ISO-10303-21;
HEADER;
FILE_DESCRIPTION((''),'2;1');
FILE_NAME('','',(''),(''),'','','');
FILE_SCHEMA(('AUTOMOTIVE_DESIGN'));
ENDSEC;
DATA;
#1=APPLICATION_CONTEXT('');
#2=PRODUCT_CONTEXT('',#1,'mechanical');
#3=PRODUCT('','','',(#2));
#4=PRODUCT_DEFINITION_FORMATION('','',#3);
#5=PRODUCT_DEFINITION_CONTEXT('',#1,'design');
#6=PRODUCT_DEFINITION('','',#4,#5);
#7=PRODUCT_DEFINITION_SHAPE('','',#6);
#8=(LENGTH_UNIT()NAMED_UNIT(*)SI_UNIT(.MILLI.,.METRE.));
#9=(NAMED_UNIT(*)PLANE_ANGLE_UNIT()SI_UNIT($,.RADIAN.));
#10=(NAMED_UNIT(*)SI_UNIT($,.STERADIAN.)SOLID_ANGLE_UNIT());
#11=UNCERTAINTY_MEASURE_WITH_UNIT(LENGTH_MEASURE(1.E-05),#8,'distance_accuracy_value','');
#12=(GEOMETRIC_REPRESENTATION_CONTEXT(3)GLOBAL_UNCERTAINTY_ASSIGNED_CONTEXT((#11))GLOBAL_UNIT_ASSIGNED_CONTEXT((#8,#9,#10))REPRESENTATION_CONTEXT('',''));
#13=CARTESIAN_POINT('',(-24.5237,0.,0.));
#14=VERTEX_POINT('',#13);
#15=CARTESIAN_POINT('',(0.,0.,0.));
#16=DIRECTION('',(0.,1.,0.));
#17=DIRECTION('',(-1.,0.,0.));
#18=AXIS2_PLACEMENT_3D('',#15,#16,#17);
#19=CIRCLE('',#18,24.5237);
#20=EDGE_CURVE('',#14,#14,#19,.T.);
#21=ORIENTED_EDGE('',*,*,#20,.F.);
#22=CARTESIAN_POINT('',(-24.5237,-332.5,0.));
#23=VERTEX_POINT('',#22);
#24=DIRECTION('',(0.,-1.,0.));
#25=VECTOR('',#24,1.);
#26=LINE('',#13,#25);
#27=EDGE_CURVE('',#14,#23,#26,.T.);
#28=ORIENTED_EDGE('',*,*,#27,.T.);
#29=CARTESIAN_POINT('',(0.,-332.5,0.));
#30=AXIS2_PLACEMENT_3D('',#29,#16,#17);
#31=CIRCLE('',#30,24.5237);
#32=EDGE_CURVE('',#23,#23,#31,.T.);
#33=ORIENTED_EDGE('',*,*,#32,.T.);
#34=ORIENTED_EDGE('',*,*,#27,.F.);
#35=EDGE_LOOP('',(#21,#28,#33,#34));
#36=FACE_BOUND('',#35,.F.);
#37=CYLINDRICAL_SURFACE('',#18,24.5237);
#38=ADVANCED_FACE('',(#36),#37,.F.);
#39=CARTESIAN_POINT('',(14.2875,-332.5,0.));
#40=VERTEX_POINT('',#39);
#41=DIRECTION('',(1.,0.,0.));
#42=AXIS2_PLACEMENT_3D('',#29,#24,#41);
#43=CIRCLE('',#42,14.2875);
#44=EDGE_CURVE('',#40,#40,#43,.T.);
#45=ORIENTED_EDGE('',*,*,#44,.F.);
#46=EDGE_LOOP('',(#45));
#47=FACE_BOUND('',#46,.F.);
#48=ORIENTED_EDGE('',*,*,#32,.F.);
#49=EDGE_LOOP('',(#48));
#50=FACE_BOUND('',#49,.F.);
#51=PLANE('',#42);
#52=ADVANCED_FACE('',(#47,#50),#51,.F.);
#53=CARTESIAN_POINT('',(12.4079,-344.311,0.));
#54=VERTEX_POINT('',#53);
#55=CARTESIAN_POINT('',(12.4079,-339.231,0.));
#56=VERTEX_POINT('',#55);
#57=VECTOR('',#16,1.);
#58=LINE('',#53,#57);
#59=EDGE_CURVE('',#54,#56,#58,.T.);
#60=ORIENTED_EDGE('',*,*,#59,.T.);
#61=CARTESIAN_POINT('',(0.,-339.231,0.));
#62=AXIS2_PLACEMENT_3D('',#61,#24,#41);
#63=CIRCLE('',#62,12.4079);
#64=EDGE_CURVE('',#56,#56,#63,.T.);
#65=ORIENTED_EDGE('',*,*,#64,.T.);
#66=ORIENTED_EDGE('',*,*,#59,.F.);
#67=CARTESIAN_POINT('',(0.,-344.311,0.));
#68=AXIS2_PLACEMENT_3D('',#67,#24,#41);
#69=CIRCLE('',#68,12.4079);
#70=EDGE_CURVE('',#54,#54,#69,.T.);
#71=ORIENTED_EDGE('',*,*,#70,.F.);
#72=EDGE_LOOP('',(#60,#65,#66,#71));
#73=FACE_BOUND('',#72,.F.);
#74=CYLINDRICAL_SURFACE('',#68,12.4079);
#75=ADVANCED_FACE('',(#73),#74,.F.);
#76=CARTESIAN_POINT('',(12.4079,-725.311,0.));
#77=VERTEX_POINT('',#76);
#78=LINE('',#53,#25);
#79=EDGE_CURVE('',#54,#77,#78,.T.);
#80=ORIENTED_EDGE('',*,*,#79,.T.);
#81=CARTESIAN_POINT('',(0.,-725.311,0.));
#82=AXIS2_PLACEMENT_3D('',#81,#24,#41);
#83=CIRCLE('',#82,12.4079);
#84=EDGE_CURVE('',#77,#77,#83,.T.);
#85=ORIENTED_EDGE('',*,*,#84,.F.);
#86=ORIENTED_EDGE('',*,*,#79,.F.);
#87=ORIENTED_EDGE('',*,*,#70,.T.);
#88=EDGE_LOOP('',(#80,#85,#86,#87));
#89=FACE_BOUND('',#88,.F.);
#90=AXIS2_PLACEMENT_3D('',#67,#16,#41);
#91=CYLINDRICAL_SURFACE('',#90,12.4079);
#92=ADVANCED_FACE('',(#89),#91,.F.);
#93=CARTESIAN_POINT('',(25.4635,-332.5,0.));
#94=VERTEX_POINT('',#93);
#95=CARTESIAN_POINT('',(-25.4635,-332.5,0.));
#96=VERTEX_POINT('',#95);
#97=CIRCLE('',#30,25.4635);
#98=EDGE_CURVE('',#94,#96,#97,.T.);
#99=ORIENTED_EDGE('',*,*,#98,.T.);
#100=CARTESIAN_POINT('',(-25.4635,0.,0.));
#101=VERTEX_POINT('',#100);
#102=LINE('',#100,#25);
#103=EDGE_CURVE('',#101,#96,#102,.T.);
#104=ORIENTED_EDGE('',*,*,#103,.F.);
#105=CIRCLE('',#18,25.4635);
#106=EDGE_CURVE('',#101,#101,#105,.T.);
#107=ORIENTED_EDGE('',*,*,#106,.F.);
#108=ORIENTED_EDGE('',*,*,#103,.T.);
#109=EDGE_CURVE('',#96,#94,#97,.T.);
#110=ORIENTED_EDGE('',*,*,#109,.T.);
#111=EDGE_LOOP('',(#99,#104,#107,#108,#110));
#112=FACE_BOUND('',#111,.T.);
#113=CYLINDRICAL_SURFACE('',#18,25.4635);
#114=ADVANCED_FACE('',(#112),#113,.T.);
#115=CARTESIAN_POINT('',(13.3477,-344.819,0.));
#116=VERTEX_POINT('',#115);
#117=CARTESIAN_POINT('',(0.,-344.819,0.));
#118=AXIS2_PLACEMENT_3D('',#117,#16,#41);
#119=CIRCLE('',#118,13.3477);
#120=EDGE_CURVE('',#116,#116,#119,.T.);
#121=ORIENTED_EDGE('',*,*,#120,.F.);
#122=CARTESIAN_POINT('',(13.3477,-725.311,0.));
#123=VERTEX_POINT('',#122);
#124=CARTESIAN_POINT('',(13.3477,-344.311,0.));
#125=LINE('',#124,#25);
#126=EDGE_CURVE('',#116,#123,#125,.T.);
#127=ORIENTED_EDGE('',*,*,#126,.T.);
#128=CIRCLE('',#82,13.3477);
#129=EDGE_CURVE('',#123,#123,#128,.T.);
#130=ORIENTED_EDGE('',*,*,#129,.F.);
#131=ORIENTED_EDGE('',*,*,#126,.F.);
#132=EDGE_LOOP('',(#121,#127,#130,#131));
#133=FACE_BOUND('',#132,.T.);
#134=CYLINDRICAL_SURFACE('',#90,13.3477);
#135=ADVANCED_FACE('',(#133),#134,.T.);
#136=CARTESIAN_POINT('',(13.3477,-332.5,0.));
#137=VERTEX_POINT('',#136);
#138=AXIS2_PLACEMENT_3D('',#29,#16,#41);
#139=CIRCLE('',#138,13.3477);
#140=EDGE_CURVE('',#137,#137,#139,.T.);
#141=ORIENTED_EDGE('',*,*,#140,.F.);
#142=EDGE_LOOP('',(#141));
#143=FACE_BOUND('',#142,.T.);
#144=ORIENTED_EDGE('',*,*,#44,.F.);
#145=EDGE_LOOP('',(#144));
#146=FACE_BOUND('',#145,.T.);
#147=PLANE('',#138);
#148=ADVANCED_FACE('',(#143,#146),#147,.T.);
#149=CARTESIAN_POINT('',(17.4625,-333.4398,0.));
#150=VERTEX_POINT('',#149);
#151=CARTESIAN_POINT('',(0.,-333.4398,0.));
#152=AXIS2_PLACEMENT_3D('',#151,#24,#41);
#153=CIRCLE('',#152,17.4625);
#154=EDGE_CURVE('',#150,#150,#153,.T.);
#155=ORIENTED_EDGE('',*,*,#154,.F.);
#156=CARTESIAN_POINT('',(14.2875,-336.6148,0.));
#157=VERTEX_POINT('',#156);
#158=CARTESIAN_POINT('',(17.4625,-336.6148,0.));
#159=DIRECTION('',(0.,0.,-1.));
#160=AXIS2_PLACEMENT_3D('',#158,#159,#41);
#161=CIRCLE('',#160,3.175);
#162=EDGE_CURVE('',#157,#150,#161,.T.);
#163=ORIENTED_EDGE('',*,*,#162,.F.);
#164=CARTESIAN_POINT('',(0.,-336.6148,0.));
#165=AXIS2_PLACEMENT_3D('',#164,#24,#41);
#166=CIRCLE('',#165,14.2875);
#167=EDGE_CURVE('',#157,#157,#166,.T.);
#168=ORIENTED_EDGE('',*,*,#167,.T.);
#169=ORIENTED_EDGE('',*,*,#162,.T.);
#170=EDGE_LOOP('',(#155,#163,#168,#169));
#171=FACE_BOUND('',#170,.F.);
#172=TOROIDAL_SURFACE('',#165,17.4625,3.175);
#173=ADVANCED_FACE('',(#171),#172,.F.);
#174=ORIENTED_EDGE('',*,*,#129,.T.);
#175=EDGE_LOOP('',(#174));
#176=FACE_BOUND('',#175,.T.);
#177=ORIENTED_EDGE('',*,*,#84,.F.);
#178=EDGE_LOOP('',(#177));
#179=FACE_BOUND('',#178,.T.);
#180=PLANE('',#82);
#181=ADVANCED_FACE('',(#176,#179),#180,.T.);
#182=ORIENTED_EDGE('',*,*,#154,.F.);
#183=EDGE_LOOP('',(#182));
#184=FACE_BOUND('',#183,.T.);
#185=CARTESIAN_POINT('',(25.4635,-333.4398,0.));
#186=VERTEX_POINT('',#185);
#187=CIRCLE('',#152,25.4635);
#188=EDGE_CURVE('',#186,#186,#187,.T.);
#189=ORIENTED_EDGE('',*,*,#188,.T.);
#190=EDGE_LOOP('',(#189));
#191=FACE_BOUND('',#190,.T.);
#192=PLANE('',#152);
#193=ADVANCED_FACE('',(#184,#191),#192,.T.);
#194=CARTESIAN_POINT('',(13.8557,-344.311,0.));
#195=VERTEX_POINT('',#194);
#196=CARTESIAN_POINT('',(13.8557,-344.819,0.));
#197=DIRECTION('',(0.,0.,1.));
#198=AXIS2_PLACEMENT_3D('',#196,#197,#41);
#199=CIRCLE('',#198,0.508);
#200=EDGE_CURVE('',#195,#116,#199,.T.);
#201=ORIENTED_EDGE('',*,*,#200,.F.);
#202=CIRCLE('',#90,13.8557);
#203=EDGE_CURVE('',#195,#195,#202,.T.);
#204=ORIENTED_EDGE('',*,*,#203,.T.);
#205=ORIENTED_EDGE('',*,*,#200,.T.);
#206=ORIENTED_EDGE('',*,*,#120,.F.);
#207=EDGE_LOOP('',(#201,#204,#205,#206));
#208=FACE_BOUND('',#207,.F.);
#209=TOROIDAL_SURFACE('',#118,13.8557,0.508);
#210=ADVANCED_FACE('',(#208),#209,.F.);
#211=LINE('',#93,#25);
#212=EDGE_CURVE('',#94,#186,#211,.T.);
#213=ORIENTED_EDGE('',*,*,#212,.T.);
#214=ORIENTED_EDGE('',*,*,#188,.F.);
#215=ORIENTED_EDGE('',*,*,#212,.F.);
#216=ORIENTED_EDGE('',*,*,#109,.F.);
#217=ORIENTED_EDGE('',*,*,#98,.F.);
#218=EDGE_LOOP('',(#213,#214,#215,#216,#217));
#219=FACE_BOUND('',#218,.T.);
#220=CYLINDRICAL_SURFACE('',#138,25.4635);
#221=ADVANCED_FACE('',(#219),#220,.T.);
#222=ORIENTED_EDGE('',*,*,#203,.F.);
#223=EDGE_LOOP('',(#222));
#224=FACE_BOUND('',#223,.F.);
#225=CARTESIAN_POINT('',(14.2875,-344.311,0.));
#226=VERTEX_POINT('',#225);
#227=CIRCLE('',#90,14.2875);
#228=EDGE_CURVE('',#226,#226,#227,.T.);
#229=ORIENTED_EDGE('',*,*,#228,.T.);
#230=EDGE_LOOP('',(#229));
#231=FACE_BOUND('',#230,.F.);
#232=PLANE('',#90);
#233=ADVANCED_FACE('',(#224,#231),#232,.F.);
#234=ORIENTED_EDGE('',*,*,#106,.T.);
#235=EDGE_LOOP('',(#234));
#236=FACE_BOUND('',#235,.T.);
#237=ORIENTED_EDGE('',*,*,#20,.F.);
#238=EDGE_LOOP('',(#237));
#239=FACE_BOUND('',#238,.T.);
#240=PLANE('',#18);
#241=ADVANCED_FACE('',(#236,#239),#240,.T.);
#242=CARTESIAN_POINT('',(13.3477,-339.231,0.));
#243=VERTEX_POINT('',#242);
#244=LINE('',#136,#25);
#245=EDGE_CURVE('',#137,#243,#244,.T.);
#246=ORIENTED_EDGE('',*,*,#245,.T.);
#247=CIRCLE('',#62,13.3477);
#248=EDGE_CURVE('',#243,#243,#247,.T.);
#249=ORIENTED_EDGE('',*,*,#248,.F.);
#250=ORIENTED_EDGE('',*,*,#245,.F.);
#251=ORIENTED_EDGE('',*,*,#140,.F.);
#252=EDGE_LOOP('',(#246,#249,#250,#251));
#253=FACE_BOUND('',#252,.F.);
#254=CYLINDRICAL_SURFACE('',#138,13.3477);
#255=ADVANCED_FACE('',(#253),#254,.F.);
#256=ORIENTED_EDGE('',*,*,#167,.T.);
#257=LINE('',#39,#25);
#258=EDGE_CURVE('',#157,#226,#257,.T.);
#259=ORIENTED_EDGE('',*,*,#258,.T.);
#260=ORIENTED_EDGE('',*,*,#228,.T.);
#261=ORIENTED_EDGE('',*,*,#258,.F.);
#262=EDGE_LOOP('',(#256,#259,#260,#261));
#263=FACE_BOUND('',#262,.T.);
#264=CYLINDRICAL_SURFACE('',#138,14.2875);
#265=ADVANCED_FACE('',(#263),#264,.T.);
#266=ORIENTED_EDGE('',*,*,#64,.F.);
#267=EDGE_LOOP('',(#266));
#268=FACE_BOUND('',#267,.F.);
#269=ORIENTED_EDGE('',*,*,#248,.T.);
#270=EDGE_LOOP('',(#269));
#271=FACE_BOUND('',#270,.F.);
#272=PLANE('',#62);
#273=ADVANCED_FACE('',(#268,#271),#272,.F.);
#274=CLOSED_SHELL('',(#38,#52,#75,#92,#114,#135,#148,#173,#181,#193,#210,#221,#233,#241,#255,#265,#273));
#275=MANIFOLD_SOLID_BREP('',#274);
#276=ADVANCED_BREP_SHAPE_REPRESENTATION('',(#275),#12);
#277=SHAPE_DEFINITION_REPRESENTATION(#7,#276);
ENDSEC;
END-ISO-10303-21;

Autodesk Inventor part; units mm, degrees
ref_plane "YZ Plane" through (0, 0, 0) normal (1, 0, 0) x (0, 1, 0)
ref_plane "XZ Plane" through (0, 0, 0) normal (0, 1, 0) x (-1, 0, 0)
ref_plane "XY Plane" through (0, 0, 0) normal (0, 0, 1) x (1, 0, 0)
sketch "Sketch1" plane through (0, 0, 0) normal (0, 1, 0) x (-1, 0, 0)
  circle A0 centre (0, 0) radius 25.4635
  circle A1 centre (0, 0) radius 24.5237
  dimension "d0" = 50.927
  dimension "d1" = 0.9398
extrude "Extrusion1" add sketch "Sketch1" against normal blind 332.5
sketch "Sketch2" plane through (0, -332.5, 0) normal (0, -1, 0) x (1, 0, 0)
  circle A0 centre (0, 0) radius 14.2875
  circle A1 centre (0, 0) radius 25.4635
  circle A2 centre (0, 0) radius 25.4635 projected
  dimension "d4" = 28.575
extrude "Extrusion2" add sketch "Sketch2" along normal blind 0.9398
sketch "Sketch3" plane through (0, -332.5, 0) normal (0, 1, 0) x (1, 0, 0)
  circle A0 centre (0, 0) radius 14.2875
  circle A1 centre (0, 0) radius 14.2875 projected
  circle A2 centre (0, 0) radius 13.3477
  dimension "d7" = 0.9398
extrude "Extrusion3" add sketch "Sketch3" against normal blind 11.811
sketch "Sketch4" plane through (0, -344.311, 0) normal (0, -1, 0) x (1, 0, 0)
  circle A0 centre (0, 0) radius 13.3477
  circle A1 centre (0, 0) radius 13.3477 projected
  circle A2 centre (0, 0) radius 12.4079
  dimension "d10" = 0.9398
extrude "Extrusion4" add sketch "Sketch4" along normal blind 381 and the other way blind 5.08
fillet "Fillet1" radius 3.175 1 edges at (-14.2875, -333.4398, 0)
fillet "Fillet2" radius 0.508 1 edges at (-13.3477, -344.311, 0)
properties part number "still pipe unmodified" material "Stainless Steel AISI 304"
